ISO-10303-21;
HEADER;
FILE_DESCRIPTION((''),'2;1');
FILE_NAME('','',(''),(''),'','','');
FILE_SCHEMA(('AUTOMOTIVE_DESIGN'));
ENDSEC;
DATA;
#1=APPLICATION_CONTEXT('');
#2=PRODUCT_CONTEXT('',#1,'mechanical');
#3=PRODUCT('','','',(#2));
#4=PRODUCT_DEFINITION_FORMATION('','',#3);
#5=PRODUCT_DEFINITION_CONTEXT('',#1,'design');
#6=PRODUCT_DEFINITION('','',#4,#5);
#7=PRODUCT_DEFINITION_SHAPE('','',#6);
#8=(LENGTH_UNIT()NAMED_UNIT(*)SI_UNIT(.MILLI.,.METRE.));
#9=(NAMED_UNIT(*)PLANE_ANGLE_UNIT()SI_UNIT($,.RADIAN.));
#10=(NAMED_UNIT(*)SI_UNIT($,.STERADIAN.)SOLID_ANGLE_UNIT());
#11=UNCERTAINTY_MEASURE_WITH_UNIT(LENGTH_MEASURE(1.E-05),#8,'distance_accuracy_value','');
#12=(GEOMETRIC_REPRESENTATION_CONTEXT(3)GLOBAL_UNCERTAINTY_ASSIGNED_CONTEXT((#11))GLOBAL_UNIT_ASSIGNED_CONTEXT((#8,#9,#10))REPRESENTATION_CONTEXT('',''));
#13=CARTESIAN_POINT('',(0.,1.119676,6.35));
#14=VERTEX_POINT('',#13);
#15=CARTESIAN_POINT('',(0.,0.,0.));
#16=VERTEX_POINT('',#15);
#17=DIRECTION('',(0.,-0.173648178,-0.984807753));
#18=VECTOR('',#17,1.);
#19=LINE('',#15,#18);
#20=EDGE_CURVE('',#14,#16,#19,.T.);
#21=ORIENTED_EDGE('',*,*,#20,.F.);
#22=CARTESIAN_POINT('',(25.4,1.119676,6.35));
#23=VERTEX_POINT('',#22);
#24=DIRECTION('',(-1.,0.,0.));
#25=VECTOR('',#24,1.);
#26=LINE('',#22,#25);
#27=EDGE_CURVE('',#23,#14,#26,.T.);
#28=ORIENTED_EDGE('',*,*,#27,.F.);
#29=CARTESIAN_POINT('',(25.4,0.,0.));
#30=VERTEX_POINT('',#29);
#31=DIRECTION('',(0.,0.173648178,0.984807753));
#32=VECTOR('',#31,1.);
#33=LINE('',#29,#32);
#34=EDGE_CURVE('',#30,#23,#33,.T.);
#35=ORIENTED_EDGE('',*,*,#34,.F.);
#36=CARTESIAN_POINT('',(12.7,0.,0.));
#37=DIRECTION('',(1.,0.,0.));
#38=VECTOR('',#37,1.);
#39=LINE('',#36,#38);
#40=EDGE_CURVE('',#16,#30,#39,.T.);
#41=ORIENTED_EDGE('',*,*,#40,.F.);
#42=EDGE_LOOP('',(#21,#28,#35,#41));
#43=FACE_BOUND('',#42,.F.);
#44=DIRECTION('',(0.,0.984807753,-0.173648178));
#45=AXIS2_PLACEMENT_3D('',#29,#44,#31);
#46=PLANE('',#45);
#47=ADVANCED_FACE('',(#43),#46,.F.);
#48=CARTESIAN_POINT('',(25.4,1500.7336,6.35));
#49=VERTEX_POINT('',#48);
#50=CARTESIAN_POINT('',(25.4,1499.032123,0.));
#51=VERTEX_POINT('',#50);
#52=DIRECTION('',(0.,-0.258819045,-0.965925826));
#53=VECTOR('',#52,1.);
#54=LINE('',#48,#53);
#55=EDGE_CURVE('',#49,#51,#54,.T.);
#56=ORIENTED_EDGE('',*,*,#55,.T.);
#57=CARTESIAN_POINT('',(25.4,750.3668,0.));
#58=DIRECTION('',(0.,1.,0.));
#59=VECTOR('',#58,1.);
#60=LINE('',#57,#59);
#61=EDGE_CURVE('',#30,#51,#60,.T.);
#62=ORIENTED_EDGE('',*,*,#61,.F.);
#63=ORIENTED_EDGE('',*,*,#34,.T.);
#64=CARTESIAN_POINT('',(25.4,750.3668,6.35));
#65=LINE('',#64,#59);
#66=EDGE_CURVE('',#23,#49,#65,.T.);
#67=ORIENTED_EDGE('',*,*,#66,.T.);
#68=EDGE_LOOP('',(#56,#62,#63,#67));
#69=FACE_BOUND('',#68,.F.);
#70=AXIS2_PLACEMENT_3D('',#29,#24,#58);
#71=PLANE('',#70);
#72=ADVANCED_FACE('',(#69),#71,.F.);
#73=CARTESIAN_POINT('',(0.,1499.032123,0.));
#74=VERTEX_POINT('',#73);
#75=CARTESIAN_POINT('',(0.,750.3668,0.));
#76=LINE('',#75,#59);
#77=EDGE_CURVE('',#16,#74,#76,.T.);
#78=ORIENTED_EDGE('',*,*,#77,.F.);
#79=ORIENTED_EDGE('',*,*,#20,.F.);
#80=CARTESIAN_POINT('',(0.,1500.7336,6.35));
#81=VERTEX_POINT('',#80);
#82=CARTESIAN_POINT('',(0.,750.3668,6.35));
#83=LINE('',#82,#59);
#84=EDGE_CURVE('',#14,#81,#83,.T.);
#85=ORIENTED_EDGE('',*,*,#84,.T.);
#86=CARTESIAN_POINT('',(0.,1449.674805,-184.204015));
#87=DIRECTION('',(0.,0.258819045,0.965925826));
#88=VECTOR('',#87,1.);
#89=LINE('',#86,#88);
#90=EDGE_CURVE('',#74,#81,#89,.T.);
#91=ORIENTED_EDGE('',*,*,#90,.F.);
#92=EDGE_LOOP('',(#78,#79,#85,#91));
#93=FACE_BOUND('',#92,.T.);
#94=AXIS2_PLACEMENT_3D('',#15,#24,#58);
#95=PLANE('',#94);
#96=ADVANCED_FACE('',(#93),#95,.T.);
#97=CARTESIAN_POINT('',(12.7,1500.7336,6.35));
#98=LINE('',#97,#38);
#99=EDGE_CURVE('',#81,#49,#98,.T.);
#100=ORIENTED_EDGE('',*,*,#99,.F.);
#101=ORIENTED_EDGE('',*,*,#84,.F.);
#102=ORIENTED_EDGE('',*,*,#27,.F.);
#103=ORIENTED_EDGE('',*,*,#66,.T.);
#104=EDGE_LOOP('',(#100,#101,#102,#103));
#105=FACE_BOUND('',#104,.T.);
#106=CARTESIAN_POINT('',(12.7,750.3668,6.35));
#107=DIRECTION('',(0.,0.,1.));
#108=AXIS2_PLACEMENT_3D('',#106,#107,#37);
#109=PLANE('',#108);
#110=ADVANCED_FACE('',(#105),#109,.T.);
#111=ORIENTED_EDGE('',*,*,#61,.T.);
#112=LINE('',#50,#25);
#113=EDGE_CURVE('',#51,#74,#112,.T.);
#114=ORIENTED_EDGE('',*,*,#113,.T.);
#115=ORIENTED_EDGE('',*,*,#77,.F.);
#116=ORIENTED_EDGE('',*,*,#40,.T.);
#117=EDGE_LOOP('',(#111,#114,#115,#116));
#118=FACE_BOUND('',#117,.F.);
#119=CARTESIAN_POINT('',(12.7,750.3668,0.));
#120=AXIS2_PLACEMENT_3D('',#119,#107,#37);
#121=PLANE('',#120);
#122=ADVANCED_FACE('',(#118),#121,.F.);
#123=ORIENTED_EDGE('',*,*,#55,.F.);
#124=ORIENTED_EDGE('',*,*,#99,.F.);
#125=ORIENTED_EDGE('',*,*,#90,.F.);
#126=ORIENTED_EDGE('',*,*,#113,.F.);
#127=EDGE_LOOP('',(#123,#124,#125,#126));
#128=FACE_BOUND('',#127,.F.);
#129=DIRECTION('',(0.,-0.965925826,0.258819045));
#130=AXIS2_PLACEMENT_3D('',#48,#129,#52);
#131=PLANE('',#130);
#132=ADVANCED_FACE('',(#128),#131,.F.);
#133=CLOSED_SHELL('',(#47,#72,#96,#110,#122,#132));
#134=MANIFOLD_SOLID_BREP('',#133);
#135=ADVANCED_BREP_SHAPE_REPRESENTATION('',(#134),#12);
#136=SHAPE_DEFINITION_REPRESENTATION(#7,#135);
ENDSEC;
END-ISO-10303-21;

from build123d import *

# Parameters (mm, degrees)
F0_W     = 25.4
F0_H     = 1500.7336
F1_DEPTH = 6.35
F3_DEPTH = 25.401


# Not quite as in the source:
# - a feature names something its author has since deleted; it is built from what else it names


with BuildPart() as f1:
    # F0 (on Top) → F1 (new body)
    with BuildSketch(Plane.XY):
        with Locations((12.7, 750.3668)):
            Rectangle(F0_W, F0_H)
    extrude(amount=F1_DEPTH)

    # F2 (on face) → F3 (cut, through all)
    with BuildSketch(Plane.YZ.offset(25.4)):
        Polygon((1.1196763275, 6.35), (0, 6.35), (0, 0), align=None)
        Polygon((1500.7336, 6.35), (1499.0321226281, 0), (1500.7336, 0), align=None)
    extrude(amount=-F3_DEPTH, mode=Mode.SUBTRACT)


solid = f1.part
